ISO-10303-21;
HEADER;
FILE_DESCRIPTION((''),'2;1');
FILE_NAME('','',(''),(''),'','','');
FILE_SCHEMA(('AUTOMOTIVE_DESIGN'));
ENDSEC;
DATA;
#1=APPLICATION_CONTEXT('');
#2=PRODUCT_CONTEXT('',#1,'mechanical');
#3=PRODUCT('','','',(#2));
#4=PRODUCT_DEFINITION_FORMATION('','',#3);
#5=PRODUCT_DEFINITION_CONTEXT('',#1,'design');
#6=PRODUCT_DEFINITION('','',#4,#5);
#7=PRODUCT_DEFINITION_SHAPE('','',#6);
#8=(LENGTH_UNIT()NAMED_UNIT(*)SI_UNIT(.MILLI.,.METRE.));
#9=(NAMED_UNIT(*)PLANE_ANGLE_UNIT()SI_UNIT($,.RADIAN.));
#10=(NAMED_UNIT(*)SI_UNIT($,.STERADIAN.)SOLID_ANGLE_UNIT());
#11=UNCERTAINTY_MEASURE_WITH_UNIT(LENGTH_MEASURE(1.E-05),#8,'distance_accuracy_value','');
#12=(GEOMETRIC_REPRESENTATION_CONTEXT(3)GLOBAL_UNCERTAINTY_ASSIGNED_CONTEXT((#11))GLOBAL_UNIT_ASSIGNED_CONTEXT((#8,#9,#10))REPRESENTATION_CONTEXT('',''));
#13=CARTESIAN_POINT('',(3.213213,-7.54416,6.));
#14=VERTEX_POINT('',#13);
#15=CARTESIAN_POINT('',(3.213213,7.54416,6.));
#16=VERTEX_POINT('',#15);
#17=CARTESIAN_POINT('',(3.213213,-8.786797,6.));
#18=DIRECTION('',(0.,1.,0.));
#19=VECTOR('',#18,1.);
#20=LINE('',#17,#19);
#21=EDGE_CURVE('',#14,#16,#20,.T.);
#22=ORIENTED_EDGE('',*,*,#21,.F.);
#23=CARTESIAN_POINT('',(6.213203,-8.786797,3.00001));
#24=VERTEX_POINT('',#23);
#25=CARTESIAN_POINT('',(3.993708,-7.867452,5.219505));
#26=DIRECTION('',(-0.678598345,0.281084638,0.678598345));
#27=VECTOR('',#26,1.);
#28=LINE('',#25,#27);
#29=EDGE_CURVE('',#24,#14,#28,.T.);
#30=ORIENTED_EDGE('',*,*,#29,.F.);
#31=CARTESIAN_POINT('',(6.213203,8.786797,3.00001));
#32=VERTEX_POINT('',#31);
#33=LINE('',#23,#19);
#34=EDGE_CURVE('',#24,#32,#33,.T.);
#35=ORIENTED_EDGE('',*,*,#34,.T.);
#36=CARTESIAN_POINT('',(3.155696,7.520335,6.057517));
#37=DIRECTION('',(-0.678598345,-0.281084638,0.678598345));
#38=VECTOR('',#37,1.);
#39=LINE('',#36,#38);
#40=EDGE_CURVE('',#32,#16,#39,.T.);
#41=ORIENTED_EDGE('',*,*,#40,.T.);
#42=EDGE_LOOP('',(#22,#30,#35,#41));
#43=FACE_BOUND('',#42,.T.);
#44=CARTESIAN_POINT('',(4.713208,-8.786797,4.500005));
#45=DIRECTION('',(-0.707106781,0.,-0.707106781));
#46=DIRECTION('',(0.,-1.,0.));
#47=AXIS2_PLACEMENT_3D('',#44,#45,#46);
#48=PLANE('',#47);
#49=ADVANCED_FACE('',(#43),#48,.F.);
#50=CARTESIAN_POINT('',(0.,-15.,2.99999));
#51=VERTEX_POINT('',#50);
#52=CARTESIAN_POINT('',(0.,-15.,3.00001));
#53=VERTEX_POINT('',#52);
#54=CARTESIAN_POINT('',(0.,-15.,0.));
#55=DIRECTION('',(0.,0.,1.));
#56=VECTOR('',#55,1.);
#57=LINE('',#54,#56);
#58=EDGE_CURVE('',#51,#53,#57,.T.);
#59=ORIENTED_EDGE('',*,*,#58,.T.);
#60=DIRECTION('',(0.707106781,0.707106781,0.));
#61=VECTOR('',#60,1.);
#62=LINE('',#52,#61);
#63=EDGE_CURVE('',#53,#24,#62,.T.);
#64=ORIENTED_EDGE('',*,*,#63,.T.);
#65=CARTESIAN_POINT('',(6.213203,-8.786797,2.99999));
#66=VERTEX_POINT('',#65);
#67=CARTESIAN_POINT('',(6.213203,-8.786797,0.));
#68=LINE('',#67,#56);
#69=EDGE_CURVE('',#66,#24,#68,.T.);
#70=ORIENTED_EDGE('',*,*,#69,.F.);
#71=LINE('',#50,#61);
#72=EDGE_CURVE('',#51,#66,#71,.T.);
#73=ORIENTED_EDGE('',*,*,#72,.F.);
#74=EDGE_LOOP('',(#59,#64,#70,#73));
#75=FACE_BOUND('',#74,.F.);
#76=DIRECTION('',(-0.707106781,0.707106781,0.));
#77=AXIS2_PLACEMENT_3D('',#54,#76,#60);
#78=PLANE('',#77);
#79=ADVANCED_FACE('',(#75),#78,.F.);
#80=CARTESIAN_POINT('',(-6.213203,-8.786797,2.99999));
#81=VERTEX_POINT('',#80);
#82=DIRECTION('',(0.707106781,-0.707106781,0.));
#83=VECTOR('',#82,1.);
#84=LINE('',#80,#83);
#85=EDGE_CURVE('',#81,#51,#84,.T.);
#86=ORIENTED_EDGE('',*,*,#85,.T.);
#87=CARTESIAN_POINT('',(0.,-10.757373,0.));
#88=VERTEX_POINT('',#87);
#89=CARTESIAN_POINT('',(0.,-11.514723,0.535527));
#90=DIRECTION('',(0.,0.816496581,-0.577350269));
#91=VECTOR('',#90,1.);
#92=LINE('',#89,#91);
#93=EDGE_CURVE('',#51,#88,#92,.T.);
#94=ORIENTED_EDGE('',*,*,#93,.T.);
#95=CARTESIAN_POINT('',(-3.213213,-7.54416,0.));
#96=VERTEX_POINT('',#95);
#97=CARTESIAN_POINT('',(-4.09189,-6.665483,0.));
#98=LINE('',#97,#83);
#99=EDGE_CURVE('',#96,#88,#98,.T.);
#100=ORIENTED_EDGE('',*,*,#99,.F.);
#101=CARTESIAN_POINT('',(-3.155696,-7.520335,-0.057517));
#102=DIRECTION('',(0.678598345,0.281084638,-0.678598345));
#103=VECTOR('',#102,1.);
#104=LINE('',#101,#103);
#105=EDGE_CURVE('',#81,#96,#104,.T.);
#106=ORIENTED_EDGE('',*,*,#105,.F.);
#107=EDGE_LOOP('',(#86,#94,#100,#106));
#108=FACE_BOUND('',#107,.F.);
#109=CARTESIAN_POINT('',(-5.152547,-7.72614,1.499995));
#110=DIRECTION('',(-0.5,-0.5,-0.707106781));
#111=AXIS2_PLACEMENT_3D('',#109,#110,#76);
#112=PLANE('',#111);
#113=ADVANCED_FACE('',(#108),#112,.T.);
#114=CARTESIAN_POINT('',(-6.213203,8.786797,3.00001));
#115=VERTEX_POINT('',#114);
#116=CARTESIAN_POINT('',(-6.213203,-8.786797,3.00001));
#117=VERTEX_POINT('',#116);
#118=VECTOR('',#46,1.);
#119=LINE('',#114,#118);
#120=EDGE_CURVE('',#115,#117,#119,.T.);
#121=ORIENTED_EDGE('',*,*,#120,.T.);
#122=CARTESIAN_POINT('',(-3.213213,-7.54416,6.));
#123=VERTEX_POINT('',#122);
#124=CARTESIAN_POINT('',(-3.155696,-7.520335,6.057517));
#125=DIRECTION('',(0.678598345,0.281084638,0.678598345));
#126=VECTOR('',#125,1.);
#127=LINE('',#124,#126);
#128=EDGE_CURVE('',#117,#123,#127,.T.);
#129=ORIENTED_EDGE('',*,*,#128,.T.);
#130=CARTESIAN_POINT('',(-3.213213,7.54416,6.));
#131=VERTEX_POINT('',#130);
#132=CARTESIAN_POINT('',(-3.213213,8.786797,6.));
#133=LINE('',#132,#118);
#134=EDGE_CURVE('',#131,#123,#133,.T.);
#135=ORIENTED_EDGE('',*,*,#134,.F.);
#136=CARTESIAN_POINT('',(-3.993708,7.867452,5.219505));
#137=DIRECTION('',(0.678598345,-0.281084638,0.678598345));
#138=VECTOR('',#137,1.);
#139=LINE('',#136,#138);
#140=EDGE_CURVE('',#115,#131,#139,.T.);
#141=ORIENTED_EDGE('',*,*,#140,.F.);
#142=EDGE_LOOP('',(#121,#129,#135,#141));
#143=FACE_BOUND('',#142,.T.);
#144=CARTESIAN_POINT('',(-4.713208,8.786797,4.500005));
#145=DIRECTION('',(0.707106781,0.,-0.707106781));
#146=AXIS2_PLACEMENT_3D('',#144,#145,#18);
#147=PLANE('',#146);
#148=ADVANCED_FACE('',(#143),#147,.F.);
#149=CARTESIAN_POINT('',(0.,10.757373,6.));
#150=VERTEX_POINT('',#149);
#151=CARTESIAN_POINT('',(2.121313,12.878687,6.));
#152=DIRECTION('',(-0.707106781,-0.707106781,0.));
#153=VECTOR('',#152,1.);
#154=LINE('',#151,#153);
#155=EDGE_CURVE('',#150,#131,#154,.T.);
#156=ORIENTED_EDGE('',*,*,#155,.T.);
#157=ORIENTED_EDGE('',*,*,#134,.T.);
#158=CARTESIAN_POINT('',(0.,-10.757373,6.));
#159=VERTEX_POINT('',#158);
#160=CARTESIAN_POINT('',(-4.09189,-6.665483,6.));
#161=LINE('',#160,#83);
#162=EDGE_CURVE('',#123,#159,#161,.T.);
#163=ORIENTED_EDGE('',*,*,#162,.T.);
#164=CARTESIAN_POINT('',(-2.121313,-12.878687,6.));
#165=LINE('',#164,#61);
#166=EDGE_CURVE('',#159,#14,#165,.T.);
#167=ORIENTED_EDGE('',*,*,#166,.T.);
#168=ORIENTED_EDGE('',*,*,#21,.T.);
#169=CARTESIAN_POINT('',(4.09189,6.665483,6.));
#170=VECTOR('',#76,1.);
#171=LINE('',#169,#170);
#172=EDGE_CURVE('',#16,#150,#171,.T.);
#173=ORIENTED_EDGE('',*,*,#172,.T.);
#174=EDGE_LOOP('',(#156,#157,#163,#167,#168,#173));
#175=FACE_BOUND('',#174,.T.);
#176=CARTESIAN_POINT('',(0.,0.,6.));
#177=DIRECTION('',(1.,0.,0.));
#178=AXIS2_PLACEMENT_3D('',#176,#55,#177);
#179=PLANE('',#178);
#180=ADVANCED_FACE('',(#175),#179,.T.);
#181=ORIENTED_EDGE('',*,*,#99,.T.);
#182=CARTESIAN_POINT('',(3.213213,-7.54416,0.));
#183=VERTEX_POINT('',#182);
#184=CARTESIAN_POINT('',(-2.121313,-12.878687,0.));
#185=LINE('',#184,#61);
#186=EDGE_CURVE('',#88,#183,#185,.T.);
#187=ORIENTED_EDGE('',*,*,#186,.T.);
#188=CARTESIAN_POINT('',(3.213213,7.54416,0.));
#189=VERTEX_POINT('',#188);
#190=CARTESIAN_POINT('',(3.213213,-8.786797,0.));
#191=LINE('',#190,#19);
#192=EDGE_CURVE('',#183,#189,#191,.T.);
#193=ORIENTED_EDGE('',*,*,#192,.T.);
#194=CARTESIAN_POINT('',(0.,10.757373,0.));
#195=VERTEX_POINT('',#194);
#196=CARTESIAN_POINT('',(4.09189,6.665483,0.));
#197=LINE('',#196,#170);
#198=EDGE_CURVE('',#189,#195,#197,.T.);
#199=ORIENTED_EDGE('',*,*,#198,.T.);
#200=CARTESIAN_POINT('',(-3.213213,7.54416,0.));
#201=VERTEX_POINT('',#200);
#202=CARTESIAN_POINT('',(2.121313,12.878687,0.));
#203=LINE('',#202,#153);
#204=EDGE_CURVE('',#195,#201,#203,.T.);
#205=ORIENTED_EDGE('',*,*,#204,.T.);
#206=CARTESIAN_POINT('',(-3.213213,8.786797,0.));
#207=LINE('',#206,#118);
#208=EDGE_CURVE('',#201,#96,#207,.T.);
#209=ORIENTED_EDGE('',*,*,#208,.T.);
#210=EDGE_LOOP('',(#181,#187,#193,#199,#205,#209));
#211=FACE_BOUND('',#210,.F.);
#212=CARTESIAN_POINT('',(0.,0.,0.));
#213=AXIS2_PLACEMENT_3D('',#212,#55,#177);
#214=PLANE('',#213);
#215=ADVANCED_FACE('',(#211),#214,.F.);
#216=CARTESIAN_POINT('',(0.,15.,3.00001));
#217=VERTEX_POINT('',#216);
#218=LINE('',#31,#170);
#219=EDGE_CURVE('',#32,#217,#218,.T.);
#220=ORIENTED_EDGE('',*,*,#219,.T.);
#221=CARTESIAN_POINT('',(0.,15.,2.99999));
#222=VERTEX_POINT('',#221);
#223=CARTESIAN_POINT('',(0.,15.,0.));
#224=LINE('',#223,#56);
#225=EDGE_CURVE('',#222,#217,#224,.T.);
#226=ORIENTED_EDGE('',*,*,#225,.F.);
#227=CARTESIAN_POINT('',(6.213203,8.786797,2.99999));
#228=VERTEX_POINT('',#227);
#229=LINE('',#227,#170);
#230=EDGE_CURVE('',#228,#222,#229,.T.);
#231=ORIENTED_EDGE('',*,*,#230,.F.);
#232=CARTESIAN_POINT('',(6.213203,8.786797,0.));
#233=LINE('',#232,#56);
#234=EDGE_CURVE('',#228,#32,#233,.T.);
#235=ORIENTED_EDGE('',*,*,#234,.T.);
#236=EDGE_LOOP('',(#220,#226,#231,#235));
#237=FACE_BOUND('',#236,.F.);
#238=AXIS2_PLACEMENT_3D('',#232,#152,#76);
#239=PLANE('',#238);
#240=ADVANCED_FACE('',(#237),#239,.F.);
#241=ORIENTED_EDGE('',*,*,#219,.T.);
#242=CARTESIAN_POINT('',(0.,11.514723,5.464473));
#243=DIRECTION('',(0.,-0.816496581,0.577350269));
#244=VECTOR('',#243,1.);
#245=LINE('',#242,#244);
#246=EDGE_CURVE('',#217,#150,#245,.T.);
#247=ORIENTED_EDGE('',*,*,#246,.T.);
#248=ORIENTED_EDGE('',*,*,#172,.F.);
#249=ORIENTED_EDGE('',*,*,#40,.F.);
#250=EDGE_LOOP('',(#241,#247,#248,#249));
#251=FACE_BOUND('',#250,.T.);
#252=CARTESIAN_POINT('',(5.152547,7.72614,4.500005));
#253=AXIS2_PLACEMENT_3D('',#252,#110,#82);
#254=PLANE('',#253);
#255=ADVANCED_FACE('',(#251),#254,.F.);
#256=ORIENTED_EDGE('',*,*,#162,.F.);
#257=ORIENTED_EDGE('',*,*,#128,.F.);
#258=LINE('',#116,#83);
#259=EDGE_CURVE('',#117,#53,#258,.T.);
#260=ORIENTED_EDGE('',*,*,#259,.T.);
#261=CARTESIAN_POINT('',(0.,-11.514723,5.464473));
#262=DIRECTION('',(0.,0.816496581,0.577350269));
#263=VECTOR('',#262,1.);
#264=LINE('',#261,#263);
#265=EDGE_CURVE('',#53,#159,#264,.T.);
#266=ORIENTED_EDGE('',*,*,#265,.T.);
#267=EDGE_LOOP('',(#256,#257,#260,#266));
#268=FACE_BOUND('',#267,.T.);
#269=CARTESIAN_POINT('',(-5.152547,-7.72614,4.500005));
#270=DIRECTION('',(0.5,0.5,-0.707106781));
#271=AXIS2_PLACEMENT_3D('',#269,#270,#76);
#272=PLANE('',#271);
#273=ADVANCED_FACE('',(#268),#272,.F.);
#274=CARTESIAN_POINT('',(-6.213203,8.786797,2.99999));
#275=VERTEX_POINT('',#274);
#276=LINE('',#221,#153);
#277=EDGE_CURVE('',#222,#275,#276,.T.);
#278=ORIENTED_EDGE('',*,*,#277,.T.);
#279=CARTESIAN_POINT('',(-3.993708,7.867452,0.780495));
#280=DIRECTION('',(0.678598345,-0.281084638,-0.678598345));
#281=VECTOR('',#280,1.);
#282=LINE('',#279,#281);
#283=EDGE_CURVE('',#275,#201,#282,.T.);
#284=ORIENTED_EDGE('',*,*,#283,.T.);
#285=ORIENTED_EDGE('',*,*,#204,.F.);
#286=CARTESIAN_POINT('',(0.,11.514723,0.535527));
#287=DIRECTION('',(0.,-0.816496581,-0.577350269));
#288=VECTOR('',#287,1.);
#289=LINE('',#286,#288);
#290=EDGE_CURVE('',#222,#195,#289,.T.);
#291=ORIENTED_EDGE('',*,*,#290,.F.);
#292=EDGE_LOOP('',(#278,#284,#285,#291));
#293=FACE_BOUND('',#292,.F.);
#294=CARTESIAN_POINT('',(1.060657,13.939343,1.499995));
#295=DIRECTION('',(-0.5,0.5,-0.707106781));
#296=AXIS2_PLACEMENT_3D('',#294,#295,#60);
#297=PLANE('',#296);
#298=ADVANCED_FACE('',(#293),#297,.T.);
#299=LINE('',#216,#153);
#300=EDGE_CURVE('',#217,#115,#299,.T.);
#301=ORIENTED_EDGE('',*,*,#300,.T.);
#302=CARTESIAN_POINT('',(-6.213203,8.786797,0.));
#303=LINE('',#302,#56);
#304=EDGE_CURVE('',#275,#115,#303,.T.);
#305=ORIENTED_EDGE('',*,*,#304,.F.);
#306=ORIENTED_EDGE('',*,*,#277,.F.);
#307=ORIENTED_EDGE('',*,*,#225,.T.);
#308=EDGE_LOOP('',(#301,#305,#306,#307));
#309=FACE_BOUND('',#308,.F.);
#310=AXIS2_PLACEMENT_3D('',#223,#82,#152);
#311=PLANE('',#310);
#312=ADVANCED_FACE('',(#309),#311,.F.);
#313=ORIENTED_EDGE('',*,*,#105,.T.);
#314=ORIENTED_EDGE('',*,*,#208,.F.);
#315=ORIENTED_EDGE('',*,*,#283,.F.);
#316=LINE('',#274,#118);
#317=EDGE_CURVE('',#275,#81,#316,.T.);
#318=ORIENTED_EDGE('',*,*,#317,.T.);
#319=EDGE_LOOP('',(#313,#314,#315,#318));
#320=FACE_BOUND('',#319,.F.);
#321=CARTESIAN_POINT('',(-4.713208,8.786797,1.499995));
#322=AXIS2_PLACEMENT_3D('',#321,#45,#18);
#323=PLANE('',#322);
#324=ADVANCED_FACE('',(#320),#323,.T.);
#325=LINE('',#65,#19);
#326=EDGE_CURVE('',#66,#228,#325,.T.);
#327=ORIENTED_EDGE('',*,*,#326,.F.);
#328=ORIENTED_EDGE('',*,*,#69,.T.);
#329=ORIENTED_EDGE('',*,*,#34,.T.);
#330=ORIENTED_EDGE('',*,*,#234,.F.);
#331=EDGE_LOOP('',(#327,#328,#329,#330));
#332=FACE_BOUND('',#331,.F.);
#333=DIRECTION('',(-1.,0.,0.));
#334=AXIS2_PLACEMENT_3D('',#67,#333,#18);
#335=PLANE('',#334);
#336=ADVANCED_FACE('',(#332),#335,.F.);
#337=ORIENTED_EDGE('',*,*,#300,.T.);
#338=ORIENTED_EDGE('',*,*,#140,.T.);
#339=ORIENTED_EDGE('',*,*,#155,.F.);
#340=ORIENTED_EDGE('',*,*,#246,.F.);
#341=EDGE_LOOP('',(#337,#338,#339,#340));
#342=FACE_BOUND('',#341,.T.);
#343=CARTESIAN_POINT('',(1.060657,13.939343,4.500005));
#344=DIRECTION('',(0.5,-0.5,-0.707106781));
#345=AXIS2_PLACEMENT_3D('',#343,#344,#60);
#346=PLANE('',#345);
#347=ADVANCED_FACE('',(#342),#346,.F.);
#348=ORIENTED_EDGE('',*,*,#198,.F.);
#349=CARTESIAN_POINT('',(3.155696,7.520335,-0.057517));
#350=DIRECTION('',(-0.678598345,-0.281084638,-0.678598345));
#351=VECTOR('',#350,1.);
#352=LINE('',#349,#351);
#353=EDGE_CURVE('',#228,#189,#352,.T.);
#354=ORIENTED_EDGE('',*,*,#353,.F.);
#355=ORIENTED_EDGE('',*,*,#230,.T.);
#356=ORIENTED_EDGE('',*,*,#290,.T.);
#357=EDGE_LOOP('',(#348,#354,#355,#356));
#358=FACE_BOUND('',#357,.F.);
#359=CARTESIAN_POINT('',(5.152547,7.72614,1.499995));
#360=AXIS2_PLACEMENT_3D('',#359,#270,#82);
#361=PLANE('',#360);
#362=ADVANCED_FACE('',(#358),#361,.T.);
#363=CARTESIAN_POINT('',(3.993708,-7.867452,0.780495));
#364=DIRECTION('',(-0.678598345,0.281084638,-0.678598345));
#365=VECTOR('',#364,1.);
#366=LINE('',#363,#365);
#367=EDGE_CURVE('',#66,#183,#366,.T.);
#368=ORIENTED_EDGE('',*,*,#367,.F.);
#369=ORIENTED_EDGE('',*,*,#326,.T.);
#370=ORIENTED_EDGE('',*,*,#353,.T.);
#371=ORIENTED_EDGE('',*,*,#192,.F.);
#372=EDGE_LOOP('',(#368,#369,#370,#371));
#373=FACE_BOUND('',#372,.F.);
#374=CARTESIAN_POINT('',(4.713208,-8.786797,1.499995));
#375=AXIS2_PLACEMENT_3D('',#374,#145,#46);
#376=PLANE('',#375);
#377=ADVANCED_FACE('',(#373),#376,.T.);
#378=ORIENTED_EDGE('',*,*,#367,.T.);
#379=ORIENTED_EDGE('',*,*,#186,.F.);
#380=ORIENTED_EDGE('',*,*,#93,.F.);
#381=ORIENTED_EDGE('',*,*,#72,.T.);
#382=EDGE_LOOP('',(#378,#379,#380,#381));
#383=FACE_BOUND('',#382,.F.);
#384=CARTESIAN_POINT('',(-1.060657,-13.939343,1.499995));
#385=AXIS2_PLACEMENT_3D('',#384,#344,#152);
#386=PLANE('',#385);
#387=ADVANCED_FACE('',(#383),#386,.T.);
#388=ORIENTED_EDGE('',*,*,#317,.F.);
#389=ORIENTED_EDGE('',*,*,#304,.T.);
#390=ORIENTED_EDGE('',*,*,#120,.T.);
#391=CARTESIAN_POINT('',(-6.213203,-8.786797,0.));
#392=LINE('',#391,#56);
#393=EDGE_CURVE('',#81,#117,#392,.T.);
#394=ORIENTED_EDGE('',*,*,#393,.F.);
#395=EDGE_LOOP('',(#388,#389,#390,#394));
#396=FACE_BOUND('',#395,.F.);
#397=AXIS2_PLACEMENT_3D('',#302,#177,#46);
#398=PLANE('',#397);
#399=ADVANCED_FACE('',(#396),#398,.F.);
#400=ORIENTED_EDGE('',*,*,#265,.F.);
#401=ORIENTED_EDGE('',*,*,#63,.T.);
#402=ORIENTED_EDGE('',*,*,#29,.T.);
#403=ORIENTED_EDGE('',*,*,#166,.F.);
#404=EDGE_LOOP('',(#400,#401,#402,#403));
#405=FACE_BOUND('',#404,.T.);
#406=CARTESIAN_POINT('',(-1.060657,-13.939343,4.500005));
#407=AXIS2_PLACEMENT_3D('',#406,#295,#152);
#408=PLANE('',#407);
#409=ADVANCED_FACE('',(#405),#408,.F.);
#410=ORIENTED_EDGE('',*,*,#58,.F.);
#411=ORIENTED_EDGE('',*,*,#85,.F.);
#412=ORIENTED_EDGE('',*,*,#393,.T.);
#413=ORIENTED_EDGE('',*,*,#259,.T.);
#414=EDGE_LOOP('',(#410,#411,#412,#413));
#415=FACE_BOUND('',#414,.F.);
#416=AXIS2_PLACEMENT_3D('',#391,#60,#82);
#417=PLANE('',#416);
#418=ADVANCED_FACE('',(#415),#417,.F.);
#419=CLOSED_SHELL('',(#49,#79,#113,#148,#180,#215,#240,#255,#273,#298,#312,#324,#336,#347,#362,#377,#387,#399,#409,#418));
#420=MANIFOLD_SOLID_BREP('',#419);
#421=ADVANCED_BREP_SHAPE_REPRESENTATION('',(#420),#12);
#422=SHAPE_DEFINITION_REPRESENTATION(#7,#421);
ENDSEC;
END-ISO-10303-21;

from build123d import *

# Parameters (mm, degrees)
F1_DEPTH = 6
F2_SIZE  = 2.99999


# Not quite as in the source:
# - a fillet or chamfer is up to 0.001 mm smaller than in the source, because OpenCascade refuses the exact size


with BuildPart() as f1:
    # F0 (on Top) → F1 (new body)
    with BuildSketch(Plane.XY):
        Polygon((-6.2132034356, 8.7867965644), (-6.2132034356, 0), (-6.2132034356, -8.7867965644), (0, -15), (6.2132034356, -8.7867965644), (6.2132034356, 0), (6.2132034356, 8.7867965644), (0, 15), align=None)
    extrude(amount=F1_DEPTH)

    # F2 (size 3 in the source; OpenCascade refuses exactly that, so slightly less here)
    f2_edges = [f1.edges().sort_by_distance(p)[0] for p in [
        (-3.106602, 11.893398, 6),
        (3.106602, 11.893398, 6),
        (6.213203, 0, 6),
        (-6.213203, 0, 6),
        (-3.106602, -11.893398, 6),
        (3.106602, -11.893398, 6),
        (-3.106602, 11.893398, 0),
        (-6.213203, 0, 0),
        (-3.106602, -11.893398, 0),
        (3.106602, -11.893398, 0),
        (6.213203, 0, 0),
        (3.106602, 11.893398, 0),
    ]]
    chamfer(f2_edges, length=F2_SIZE)


solid = f1.part
